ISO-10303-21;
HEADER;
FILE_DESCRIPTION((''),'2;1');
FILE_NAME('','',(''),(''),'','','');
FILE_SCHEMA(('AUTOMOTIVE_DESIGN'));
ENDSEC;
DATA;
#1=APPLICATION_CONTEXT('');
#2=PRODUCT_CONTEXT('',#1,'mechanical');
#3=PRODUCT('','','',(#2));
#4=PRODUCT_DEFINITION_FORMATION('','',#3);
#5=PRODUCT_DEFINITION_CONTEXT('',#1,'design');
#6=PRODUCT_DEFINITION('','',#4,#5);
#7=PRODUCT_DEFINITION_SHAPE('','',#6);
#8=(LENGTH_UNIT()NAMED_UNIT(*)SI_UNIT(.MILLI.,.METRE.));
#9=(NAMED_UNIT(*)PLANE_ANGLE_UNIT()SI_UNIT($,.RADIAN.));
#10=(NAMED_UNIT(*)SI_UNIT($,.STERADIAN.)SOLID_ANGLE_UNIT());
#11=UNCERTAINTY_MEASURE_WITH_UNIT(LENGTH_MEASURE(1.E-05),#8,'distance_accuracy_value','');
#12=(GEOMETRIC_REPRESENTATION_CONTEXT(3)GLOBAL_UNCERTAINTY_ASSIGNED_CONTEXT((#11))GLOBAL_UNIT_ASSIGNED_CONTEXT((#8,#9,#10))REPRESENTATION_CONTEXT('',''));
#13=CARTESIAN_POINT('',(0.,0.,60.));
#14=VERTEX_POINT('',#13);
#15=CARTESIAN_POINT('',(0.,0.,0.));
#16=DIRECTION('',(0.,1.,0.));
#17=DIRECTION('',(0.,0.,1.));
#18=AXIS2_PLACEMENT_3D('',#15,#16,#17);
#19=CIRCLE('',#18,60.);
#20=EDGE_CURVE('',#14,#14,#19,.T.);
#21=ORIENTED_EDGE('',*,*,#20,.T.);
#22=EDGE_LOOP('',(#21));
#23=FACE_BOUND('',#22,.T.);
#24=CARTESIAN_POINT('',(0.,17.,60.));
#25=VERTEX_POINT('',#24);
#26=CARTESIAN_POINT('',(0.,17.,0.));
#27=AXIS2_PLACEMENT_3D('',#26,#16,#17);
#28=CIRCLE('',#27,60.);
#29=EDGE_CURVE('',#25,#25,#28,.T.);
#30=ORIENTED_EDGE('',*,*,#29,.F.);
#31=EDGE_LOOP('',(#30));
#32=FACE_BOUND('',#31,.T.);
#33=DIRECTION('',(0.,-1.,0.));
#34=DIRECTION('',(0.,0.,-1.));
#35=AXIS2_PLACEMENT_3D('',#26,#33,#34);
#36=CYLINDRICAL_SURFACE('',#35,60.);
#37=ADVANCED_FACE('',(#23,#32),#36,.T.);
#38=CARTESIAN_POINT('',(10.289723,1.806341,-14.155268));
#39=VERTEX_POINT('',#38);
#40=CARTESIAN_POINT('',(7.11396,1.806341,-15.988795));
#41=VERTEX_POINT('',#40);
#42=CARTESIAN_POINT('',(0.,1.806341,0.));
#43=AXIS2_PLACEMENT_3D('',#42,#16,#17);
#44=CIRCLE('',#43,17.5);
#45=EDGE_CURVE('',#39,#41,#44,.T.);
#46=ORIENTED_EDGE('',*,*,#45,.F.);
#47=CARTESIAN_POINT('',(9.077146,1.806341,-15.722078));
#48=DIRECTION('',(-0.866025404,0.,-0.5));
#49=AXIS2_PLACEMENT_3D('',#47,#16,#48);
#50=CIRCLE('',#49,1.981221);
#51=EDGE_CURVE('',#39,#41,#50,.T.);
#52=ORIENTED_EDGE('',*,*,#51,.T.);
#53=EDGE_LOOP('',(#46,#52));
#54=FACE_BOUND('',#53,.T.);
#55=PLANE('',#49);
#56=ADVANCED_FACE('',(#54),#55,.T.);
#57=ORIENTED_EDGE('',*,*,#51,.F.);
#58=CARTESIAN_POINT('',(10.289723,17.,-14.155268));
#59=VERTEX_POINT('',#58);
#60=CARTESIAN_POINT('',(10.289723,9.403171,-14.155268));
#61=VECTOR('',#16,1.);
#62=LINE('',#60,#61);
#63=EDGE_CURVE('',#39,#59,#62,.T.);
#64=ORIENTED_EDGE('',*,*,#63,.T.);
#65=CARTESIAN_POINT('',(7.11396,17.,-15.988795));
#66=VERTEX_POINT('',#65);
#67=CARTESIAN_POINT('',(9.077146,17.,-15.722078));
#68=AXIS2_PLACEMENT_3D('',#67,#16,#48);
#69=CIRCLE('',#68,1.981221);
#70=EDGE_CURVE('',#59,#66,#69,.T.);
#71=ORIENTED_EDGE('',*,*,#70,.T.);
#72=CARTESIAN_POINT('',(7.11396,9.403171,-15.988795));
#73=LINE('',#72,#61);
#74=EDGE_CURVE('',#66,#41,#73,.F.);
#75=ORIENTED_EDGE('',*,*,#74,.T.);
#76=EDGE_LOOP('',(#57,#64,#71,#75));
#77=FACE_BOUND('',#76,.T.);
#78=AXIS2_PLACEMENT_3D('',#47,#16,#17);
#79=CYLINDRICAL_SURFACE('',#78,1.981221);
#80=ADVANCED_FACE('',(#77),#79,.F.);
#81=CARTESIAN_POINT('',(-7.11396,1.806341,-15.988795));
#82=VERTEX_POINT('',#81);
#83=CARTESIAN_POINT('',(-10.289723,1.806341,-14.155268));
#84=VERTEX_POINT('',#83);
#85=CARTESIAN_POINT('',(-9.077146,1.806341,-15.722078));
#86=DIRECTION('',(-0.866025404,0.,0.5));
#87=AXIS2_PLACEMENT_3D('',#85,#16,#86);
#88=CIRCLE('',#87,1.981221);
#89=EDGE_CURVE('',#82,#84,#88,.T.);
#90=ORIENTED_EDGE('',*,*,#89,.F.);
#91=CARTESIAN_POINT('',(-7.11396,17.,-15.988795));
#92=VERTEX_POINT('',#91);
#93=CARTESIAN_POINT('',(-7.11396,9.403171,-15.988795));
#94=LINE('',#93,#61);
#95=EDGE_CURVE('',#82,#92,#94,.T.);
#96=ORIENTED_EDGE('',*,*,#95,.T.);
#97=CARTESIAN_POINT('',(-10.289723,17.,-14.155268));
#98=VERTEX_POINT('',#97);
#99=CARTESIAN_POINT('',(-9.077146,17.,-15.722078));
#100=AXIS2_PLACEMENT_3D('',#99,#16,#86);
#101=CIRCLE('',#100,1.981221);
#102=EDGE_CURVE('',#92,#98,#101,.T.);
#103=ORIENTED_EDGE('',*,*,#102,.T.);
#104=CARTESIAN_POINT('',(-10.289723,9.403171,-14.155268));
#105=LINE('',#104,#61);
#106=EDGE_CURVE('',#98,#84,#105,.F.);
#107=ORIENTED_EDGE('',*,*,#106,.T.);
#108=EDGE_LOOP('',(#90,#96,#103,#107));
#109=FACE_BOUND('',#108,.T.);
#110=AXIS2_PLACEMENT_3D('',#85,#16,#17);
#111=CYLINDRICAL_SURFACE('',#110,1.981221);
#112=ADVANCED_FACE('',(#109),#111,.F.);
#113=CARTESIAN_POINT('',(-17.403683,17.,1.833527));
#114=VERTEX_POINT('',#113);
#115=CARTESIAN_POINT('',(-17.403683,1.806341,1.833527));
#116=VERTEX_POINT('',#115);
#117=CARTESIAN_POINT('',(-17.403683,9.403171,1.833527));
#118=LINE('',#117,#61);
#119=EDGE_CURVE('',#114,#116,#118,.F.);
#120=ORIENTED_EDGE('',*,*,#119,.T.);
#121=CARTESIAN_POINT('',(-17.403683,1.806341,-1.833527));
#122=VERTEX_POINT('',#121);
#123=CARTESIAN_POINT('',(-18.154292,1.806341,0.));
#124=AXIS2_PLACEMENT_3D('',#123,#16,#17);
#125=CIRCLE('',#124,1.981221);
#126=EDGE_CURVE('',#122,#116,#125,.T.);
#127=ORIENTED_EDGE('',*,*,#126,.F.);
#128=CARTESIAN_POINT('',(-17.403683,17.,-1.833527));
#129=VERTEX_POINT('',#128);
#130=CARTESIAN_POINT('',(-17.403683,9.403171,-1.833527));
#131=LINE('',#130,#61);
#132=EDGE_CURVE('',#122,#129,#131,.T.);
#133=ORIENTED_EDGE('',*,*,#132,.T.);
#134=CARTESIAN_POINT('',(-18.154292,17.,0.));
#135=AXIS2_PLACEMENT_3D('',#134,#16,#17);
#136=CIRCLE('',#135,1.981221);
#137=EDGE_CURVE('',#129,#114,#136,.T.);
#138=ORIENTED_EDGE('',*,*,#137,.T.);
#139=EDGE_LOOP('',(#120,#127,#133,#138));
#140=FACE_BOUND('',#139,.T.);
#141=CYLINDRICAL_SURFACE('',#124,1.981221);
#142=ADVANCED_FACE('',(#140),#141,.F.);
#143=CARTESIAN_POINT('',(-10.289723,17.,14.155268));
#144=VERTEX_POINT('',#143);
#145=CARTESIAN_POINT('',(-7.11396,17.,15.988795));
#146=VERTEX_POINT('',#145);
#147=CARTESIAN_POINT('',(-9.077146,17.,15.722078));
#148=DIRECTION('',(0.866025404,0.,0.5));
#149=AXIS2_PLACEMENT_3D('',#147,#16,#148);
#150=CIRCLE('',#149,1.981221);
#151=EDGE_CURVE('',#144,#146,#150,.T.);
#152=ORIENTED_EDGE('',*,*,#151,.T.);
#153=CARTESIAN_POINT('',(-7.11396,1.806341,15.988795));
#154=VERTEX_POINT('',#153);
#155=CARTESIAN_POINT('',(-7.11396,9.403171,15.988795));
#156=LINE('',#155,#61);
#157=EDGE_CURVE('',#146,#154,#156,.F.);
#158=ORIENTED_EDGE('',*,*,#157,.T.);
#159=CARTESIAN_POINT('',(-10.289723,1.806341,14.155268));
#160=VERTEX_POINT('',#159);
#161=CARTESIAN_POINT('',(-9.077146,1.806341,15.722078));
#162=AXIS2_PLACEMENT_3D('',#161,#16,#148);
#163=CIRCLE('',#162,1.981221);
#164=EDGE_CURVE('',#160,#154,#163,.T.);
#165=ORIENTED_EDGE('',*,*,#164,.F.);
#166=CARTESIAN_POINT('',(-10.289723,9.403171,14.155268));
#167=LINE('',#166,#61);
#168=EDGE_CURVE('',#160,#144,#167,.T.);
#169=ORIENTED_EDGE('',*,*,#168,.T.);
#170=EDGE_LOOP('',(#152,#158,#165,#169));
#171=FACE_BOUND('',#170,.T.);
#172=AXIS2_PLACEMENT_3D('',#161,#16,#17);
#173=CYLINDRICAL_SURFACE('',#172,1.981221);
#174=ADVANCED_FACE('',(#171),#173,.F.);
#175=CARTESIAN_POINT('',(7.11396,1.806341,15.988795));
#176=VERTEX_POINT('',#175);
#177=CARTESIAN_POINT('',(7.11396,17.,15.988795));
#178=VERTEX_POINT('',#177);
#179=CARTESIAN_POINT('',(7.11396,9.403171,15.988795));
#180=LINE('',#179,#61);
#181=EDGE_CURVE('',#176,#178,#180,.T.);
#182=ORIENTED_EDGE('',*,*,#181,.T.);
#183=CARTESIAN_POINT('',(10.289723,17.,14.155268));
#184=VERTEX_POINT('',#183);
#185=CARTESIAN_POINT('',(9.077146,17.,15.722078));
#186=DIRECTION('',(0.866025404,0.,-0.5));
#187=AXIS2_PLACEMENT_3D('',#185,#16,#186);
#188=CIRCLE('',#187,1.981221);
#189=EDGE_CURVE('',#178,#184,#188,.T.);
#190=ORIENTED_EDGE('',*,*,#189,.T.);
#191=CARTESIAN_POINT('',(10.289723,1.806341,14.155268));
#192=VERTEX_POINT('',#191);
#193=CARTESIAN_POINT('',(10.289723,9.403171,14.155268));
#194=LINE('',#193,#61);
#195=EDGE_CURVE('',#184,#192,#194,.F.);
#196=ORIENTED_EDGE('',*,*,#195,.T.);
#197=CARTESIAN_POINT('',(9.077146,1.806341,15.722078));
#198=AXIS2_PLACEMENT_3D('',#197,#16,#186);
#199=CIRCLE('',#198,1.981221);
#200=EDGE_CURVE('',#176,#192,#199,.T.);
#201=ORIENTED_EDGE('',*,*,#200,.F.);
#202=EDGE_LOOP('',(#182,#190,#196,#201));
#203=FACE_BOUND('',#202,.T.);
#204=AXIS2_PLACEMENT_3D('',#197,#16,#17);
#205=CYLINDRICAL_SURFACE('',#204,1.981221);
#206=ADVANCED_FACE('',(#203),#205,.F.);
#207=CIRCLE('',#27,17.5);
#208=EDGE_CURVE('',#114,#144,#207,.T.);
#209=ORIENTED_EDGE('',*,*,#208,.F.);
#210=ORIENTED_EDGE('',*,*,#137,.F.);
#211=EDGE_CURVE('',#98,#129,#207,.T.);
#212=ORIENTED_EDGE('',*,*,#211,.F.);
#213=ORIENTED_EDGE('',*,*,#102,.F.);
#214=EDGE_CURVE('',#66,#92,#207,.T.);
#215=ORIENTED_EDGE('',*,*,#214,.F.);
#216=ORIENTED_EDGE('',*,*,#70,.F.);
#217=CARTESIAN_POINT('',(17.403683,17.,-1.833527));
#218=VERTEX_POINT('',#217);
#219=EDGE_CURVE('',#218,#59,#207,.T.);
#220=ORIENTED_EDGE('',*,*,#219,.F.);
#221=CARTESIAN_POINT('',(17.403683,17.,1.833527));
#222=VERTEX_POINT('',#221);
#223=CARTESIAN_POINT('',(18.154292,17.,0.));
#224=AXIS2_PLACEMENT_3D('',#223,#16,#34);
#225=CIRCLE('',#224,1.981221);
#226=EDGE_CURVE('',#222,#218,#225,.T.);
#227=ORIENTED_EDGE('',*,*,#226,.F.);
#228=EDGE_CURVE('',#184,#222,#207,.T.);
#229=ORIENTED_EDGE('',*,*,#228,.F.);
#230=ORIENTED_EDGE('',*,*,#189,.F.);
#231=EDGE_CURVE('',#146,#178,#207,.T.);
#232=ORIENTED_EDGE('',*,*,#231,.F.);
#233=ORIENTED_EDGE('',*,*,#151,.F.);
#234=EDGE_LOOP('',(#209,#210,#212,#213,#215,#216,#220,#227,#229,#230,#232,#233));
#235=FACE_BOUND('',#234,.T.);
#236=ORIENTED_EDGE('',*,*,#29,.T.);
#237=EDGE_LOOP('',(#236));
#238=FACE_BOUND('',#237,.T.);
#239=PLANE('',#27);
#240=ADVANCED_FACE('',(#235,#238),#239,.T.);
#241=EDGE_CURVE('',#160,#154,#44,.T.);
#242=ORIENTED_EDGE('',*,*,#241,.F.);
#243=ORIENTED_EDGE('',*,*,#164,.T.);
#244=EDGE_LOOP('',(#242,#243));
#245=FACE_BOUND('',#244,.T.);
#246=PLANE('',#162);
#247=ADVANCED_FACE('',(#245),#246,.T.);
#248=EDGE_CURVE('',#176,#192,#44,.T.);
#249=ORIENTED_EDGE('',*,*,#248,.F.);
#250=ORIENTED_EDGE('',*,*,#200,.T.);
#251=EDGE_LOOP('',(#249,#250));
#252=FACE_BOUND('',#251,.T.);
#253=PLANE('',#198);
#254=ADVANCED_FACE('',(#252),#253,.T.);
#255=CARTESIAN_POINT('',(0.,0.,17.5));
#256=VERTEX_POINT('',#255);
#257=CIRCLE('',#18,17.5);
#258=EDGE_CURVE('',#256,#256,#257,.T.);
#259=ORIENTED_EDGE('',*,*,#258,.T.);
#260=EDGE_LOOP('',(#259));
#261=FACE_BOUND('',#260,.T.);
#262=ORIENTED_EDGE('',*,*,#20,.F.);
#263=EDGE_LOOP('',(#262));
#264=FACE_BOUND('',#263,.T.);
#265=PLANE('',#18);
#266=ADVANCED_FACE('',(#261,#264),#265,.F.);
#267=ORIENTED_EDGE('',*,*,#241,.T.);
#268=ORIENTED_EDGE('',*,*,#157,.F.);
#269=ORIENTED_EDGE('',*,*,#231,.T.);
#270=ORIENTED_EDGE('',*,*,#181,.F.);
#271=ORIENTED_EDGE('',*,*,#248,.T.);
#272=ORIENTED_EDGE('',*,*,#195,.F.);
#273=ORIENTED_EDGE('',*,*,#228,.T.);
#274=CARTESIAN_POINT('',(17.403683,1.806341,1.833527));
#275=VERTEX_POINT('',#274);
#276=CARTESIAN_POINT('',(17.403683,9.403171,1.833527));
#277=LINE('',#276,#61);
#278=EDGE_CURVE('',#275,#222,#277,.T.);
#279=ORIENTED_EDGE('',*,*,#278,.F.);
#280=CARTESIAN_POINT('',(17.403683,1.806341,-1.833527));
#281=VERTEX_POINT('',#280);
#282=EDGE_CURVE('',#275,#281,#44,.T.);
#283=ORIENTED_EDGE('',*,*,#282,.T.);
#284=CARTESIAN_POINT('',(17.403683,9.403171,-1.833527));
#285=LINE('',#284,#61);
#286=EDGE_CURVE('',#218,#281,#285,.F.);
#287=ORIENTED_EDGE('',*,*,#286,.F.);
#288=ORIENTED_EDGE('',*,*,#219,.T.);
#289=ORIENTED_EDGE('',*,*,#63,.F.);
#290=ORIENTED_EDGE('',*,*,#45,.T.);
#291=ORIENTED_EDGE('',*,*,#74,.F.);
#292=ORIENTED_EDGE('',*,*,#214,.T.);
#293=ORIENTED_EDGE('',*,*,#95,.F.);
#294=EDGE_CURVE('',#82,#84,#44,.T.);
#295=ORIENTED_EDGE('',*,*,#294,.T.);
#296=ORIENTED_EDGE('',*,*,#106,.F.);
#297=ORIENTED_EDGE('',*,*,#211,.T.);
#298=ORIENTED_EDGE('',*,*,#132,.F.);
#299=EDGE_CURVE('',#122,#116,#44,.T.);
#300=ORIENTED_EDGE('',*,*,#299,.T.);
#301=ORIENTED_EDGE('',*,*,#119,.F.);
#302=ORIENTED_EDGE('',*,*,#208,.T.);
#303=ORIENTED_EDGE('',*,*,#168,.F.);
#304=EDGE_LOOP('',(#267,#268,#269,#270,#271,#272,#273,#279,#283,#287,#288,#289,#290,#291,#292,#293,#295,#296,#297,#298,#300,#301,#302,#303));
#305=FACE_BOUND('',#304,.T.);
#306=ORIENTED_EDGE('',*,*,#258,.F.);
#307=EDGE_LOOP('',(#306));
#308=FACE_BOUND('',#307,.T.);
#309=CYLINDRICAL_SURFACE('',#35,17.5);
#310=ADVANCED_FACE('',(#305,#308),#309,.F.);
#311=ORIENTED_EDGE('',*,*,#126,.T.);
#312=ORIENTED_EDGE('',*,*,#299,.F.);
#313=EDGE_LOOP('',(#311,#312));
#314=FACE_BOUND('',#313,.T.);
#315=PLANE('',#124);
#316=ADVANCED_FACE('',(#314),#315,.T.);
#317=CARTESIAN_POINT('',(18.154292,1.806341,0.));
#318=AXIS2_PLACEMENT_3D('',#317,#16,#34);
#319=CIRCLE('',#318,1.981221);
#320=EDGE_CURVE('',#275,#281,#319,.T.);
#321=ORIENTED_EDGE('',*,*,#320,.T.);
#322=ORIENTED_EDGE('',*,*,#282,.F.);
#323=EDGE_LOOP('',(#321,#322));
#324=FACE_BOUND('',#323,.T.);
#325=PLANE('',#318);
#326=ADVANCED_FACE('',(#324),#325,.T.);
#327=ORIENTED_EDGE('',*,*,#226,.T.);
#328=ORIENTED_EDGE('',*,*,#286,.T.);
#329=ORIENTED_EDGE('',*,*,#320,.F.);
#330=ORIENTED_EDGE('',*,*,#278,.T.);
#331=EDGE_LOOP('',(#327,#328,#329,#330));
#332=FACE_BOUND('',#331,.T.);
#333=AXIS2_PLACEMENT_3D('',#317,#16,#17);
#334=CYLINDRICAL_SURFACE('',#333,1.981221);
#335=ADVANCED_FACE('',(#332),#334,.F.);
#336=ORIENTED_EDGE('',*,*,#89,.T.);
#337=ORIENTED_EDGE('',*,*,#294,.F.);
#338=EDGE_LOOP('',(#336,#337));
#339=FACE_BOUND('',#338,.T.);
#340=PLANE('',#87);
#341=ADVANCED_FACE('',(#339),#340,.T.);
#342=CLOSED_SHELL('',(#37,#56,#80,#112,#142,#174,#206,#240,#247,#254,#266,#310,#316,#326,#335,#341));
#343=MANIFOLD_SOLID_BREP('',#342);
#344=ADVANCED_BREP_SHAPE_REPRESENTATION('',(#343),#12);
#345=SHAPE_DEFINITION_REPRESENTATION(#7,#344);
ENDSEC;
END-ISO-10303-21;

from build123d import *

# Parameters (mm, degrees)
SKETCH1_R           = 60
BOSS_EXTRUDE1_DEPTH = 17
SKETCH2_R           = 17.5
CUT_EXTRUDE1_DEPTH  = 87.539008545
SKETCH3_R           = 1.981221143
CUT_EXTRUDE2_DEPTH  = 15.193658536
CIRPATTERN1_COUNT   = 6


with BuildPart() as part:
    # Sketch1 → Boss-Extrude1 (new body)
    with BuildSketch(Plane(origin=(0, 0, 0), x_dir=(1, 0, 0), z_dir=(0, 1, 0))):
        Circle(SKETCH1_R)
    extrude(amount=BOSS_EXTRUDE1_DEPTH)

    # Sketch2 → Cut-Extrude1 (cut, through all)
    with BuildSketch(Plane(origin=(0, 0, 0), x_dir=(1, 0, 0), z_dir=(0, 1, 0))):
        Circle(SKETCH2_R)
    extrude(amount=CUT_EXTRUDE1_DEPTH, mode=Mode.SUBTRACT)

    # Sketch3 → Cut-Extrude2 (cut)
    with BuildSketch(Plane(origin=(0, 17, 0), x_dir=(1, 0, 0), z_dir=(0, 1, 0))):
        with Locations((-18.154292488, 0)):
            Circle(SKETCH3_R)
    cut_extrude2 = extrude(amount=-CUT_EXTRUDE2_DEPTH, mode=Mode.SUBTRACT)

    # CirPattern1: Cut-Extrude2 ×6 about axis
    cirpattern1_axis = Axis((0, 0, 0), (0, 1, 0))
    for i in range(1, CIRPATTERN1_COUNT):
        add(cut_extrude2.rotate(cirpattern1_axis, i * 360 / CIRPATTERN1_COUNT), mode=Mode.SUBTRACT)


solid = part.part
